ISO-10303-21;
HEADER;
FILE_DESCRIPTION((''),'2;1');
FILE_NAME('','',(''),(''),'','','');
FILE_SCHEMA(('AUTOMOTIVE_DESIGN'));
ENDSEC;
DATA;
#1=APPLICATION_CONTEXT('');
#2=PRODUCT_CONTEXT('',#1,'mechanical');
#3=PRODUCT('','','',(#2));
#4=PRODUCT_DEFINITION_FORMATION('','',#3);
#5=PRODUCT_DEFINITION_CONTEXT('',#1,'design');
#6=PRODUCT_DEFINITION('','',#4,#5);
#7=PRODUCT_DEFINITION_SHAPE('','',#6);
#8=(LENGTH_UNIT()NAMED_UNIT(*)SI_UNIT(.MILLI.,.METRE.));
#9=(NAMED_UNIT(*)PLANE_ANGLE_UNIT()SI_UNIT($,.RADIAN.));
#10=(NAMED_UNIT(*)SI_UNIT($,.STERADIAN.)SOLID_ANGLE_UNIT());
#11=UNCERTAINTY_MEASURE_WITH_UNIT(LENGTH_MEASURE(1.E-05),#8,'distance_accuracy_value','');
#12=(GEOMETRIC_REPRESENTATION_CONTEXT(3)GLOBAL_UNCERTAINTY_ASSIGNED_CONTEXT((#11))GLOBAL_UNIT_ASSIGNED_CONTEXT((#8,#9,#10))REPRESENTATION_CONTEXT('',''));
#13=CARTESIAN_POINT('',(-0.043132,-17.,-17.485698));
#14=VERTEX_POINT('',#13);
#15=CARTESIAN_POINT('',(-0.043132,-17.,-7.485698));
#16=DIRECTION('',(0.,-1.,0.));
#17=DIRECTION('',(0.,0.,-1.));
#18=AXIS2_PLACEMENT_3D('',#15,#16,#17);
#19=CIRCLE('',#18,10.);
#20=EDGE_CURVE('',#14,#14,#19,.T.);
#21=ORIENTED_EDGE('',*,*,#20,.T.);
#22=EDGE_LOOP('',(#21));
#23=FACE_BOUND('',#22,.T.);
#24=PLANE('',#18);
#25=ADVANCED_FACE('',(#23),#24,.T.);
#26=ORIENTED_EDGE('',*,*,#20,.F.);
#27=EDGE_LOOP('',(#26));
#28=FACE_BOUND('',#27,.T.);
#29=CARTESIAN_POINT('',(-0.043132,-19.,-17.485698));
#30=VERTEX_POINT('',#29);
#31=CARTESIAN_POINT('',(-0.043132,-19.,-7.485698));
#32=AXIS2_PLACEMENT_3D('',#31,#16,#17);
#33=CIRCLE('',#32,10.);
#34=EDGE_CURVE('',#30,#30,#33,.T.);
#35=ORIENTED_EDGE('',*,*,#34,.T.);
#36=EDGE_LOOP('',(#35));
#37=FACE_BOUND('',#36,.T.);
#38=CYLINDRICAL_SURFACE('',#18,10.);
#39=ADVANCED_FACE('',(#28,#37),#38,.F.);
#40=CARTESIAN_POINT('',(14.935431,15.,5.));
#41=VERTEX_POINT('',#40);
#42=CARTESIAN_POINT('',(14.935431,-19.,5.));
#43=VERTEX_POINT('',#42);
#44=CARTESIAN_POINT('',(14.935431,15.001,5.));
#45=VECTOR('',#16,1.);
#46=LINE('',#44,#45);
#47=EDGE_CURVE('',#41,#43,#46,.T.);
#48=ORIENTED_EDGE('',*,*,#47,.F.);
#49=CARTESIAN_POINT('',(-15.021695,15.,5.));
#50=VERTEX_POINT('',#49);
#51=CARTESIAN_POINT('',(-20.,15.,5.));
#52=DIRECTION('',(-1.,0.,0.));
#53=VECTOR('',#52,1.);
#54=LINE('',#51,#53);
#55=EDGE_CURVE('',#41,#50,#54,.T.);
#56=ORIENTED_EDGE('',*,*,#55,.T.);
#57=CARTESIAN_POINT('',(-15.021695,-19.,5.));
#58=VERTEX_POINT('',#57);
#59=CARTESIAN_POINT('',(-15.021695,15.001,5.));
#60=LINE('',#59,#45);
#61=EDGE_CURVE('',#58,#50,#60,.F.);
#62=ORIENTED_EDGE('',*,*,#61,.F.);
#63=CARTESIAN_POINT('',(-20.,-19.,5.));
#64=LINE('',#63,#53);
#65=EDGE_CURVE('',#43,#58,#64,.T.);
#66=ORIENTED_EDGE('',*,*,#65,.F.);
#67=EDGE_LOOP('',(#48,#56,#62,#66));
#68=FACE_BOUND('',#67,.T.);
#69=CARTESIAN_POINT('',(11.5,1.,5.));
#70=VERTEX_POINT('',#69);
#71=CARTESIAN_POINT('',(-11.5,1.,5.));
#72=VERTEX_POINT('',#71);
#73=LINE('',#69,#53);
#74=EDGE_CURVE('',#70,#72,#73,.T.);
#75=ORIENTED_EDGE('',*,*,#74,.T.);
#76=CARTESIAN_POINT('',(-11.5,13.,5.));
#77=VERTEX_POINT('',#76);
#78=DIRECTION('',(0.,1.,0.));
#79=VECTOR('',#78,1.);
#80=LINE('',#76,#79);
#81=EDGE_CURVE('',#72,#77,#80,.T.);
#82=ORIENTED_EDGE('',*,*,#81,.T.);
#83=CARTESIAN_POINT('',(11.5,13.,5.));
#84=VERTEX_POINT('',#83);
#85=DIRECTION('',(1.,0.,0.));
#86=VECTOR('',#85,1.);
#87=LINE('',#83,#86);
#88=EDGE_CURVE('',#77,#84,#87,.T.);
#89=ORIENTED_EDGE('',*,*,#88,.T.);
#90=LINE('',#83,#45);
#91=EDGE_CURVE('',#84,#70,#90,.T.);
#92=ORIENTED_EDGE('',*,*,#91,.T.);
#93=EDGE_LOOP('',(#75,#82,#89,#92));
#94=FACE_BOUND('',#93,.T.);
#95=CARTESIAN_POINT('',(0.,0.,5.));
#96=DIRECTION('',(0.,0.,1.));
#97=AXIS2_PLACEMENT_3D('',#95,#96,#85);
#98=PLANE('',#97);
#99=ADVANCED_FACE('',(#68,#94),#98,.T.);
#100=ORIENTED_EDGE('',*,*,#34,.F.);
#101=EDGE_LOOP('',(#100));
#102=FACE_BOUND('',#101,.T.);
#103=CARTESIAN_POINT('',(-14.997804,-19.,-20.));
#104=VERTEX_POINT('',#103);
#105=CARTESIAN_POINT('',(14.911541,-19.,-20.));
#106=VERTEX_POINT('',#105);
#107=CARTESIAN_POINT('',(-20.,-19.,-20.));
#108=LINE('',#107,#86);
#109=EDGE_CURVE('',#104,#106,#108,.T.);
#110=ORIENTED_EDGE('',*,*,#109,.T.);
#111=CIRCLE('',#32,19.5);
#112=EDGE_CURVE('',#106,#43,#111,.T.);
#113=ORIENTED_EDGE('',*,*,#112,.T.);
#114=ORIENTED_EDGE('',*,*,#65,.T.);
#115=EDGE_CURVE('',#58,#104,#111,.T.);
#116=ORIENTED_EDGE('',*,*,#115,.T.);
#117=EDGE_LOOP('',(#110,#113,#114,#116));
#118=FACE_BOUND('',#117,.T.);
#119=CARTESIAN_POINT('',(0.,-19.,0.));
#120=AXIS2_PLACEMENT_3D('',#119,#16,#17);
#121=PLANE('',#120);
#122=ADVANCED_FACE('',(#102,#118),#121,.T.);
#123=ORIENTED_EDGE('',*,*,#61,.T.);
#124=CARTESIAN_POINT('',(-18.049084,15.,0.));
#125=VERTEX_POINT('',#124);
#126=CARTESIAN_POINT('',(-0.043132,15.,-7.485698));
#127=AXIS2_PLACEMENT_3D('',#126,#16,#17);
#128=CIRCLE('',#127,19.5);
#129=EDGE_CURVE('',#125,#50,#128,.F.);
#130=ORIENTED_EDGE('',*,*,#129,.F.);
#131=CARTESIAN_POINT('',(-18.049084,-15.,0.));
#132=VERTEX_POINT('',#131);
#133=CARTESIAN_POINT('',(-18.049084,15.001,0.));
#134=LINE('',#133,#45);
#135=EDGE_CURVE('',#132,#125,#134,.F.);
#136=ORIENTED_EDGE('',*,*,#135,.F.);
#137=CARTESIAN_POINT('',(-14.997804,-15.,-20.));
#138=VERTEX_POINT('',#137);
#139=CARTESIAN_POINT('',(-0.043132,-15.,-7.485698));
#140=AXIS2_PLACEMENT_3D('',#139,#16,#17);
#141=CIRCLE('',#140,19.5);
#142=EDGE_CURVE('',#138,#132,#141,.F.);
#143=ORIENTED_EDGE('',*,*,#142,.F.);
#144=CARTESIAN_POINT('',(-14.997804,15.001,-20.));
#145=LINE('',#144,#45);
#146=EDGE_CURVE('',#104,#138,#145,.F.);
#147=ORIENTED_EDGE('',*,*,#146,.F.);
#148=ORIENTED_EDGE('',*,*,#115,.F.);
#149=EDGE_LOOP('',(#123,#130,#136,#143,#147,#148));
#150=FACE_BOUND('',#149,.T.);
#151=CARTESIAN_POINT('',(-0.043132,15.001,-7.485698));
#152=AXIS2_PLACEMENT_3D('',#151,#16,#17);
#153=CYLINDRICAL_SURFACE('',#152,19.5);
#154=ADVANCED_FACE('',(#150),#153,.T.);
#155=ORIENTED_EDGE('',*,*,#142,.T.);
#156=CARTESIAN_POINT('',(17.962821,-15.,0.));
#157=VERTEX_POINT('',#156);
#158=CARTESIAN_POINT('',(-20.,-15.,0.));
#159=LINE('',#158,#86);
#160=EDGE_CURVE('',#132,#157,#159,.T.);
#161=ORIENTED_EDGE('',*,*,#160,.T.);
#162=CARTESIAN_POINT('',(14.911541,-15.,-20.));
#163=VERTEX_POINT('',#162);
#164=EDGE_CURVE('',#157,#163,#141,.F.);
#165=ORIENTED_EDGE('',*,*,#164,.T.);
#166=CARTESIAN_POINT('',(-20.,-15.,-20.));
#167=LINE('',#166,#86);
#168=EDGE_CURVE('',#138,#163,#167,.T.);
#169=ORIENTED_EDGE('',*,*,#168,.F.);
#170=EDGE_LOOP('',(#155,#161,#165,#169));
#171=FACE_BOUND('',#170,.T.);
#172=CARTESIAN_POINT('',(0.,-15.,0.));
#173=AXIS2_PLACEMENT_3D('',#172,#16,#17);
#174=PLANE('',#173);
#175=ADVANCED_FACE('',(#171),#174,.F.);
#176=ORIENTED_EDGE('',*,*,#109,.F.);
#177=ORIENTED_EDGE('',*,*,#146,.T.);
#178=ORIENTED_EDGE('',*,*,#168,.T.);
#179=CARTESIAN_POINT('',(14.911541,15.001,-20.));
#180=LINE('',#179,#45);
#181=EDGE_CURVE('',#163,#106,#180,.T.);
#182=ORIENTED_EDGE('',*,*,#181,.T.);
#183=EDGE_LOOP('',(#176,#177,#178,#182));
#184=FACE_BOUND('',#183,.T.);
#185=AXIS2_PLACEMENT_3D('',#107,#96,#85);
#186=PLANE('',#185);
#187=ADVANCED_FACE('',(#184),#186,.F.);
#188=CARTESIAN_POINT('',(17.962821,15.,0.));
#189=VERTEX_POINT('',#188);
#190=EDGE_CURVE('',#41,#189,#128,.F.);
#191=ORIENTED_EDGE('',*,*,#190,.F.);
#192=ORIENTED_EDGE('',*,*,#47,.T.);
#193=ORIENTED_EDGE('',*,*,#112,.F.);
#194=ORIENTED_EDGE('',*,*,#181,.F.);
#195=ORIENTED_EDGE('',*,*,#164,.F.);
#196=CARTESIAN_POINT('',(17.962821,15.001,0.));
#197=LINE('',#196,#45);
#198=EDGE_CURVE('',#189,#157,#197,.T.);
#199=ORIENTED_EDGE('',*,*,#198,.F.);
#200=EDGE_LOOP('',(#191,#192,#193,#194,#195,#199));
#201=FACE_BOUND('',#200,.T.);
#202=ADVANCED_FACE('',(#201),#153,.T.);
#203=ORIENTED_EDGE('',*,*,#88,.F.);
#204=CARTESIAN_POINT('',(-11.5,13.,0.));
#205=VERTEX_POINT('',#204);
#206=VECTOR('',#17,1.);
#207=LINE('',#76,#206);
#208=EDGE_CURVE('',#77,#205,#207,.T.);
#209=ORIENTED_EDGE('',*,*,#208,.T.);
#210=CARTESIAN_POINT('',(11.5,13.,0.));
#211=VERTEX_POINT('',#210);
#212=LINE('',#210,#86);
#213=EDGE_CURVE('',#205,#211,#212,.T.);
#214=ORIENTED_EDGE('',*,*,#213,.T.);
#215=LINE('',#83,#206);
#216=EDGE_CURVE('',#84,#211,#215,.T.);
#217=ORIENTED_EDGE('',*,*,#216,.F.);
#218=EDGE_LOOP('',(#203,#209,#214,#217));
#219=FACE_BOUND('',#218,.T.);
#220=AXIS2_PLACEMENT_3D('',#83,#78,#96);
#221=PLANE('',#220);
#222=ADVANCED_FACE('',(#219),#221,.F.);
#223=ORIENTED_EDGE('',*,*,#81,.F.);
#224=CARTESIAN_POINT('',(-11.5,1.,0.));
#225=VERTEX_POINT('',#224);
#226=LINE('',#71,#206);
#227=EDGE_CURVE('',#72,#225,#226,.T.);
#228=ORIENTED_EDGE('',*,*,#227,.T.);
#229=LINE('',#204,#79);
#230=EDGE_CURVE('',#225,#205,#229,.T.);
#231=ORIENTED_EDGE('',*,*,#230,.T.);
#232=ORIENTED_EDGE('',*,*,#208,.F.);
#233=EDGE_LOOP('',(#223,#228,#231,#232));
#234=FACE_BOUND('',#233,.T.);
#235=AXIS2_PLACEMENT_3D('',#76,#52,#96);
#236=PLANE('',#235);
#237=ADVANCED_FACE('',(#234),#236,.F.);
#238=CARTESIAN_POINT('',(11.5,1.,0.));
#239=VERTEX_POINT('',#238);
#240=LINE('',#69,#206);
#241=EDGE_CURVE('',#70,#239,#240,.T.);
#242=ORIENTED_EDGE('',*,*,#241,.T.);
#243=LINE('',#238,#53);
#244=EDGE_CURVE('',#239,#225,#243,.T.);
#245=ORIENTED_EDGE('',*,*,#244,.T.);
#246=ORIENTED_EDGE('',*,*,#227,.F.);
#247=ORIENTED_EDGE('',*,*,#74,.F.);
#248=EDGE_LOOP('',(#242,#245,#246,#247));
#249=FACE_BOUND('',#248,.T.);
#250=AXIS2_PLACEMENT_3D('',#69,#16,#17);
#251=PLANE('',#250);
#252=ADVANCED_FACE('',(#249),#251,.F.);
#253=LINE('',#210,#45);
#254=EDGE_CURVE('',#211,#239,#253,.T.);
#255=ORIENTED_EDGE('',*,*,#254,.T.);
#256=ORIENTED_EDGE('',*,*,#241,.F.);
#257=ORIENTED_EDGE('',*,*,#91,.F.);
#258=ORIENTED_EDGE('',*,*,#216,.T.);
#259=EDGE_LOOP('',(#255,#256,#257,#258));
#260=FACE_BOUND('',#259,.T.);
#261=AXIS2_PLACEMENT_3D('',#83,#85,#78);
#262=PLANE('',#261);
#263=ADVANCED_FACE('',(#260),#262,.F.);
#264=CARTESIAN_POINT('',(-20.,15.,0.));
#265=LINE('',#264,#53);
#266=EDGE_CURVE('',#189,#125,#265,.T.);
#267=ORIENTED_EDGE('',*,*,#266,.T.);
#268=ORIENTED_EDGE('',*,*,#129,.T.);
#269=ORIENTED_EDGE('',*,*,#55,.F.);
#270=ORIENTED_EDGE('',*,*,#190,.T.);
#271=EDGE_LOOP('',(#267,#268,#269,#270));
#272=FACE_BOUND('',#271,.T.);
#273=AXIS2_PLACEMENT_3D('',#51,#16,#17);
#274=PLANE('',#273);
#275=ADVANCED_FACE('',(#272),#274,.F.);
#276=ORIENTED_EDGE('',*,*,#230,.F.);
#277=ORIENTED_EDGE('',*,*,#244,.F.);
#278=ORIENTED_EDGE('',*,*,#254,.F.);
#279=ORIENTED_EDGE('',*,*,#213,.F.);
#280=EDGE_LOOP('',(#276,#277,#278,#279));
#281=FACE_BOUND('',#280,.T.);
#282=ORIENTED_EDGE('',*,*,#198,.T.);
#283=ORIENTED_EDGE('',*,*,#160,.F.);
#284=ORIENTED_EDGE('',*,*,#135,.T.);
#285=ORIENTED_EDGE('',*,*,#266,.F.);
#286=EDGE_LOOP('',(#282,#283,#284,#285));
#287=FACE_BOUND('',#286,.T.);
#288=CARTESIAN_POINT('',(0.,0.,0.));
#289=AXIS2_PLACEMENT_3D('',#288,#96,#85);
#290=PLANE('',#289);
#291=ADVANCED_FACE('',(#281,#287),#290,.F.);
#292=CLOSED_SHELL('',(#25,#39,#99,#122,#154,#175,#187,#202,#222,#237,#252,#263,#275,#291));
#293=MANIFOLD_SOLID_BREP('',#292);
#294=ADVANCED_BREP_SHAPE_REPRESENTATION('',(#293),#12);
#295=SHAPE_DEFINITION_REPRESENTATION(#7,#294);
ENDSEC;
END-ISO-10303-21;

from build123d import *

# Parameters (mm, degrees)
ESQUISSE1_W             = 40
ESQUISSE1_H             = 30
BOSS_EXTRU_1_DEPTH      = 5
ESQUISSE4_W             = 40
ESQUISSE4_H             = 25
BOSS_EXTRU_2_DEPTH      = 4
ESQUISSE5_W             = 23
ESQUISSE5_H             = 12
ENL_V_MAT_EXTRU_2_DEPTH = 5
ESQUISSE6_R             = 10
ENL_V_MAT_EXTRU_3_DEPTH = 2
ENL_V_START             = -34
ENL_V_MAT_EXTRU_4_DEPTH = 34


# Read off the part's stored shape, not the designer's step: Enlèv. mat.-Extru.4
with BuildPart() as part:
    # Esquisse1 → Boss.-Extru.1 (new body)
    with BuildSketch(Plane.XY):
        Rectangle(ESQUISSE1_W, ESQUISSE1_H)
    extrude(amount=BOSS_EXTRU_1_DEPTH)

    # Esquisse4 → Boss.-Extru.2 (add)
    with BuildSketch(Plane.XZ.offset(15)):
        with Locations((0, -7.5)):
            Rectangle(ESQUISSE4_W, ESQUISSE4_H)
    extrude(amount=BOSS_EXTRU_2_DEPTH)

    # Esquisse5 → Enlèv. mat.-Extru.2 (cut)
    with BuildSketch(Plane(origin=(0, 0, 0), x_dir=(-1, 0, 0), z_dir=(0, 0, -1))):
        with Locations((0, 7)):
            Rectangle(ESQUISSE5_W, ESQUISSE5_H)
    extrude(amount=-ENL_V_MAT_EXTRU_2_DEPTH, mode=Mode.SUBTRACT)

    # Esquisse6 → Enlèv. mat.-Extru.3 (cut)
    with BuildSketch(Plane.XZ.offset(19)):
        with Locations(Location((-0.043131573, -7.485697827, 0), (0, 0, 270))):
            Circle(ESQUISSE6_R)
    extrude(amount=-ENL_V_MAT_EXTRU_3_DEPTH, mode=Mode.SUBTRACT)

    # Enlèv. mat.-Extru.4 outline → Enlèv. mat.-Extru.4 (cut)
    with BuildSketch(Plane.XZ.offset(19).offset(ENL_V_START)):
        with BuildLine():
            ThreePointArc((14.935431434, 5), (19.456859524, -7.504332113), (14.911541313, -20))
            Line((14.911541313, -20), (20, -20))
            Line((20, -20), (20, 5))
            Line((20, 5), (14.935431434, 5))
        make_face()
        with BuildLine():
            Line((-20, -20), (-14.997804459, -20))
            ThreePointArc((-14.997804459, -20), (-19.543122669, -7.504332113), (-15.02169458, 5))
            Line((-15.02169458, 5), (-20, 5))
            Line((-20, 5), (-20, -20))
        make_face()
    extrude(amount=ENL_V_MAT_EXTRU_4_DEPTH, mode=Mode.SUBTRACT)


solid = part.part
